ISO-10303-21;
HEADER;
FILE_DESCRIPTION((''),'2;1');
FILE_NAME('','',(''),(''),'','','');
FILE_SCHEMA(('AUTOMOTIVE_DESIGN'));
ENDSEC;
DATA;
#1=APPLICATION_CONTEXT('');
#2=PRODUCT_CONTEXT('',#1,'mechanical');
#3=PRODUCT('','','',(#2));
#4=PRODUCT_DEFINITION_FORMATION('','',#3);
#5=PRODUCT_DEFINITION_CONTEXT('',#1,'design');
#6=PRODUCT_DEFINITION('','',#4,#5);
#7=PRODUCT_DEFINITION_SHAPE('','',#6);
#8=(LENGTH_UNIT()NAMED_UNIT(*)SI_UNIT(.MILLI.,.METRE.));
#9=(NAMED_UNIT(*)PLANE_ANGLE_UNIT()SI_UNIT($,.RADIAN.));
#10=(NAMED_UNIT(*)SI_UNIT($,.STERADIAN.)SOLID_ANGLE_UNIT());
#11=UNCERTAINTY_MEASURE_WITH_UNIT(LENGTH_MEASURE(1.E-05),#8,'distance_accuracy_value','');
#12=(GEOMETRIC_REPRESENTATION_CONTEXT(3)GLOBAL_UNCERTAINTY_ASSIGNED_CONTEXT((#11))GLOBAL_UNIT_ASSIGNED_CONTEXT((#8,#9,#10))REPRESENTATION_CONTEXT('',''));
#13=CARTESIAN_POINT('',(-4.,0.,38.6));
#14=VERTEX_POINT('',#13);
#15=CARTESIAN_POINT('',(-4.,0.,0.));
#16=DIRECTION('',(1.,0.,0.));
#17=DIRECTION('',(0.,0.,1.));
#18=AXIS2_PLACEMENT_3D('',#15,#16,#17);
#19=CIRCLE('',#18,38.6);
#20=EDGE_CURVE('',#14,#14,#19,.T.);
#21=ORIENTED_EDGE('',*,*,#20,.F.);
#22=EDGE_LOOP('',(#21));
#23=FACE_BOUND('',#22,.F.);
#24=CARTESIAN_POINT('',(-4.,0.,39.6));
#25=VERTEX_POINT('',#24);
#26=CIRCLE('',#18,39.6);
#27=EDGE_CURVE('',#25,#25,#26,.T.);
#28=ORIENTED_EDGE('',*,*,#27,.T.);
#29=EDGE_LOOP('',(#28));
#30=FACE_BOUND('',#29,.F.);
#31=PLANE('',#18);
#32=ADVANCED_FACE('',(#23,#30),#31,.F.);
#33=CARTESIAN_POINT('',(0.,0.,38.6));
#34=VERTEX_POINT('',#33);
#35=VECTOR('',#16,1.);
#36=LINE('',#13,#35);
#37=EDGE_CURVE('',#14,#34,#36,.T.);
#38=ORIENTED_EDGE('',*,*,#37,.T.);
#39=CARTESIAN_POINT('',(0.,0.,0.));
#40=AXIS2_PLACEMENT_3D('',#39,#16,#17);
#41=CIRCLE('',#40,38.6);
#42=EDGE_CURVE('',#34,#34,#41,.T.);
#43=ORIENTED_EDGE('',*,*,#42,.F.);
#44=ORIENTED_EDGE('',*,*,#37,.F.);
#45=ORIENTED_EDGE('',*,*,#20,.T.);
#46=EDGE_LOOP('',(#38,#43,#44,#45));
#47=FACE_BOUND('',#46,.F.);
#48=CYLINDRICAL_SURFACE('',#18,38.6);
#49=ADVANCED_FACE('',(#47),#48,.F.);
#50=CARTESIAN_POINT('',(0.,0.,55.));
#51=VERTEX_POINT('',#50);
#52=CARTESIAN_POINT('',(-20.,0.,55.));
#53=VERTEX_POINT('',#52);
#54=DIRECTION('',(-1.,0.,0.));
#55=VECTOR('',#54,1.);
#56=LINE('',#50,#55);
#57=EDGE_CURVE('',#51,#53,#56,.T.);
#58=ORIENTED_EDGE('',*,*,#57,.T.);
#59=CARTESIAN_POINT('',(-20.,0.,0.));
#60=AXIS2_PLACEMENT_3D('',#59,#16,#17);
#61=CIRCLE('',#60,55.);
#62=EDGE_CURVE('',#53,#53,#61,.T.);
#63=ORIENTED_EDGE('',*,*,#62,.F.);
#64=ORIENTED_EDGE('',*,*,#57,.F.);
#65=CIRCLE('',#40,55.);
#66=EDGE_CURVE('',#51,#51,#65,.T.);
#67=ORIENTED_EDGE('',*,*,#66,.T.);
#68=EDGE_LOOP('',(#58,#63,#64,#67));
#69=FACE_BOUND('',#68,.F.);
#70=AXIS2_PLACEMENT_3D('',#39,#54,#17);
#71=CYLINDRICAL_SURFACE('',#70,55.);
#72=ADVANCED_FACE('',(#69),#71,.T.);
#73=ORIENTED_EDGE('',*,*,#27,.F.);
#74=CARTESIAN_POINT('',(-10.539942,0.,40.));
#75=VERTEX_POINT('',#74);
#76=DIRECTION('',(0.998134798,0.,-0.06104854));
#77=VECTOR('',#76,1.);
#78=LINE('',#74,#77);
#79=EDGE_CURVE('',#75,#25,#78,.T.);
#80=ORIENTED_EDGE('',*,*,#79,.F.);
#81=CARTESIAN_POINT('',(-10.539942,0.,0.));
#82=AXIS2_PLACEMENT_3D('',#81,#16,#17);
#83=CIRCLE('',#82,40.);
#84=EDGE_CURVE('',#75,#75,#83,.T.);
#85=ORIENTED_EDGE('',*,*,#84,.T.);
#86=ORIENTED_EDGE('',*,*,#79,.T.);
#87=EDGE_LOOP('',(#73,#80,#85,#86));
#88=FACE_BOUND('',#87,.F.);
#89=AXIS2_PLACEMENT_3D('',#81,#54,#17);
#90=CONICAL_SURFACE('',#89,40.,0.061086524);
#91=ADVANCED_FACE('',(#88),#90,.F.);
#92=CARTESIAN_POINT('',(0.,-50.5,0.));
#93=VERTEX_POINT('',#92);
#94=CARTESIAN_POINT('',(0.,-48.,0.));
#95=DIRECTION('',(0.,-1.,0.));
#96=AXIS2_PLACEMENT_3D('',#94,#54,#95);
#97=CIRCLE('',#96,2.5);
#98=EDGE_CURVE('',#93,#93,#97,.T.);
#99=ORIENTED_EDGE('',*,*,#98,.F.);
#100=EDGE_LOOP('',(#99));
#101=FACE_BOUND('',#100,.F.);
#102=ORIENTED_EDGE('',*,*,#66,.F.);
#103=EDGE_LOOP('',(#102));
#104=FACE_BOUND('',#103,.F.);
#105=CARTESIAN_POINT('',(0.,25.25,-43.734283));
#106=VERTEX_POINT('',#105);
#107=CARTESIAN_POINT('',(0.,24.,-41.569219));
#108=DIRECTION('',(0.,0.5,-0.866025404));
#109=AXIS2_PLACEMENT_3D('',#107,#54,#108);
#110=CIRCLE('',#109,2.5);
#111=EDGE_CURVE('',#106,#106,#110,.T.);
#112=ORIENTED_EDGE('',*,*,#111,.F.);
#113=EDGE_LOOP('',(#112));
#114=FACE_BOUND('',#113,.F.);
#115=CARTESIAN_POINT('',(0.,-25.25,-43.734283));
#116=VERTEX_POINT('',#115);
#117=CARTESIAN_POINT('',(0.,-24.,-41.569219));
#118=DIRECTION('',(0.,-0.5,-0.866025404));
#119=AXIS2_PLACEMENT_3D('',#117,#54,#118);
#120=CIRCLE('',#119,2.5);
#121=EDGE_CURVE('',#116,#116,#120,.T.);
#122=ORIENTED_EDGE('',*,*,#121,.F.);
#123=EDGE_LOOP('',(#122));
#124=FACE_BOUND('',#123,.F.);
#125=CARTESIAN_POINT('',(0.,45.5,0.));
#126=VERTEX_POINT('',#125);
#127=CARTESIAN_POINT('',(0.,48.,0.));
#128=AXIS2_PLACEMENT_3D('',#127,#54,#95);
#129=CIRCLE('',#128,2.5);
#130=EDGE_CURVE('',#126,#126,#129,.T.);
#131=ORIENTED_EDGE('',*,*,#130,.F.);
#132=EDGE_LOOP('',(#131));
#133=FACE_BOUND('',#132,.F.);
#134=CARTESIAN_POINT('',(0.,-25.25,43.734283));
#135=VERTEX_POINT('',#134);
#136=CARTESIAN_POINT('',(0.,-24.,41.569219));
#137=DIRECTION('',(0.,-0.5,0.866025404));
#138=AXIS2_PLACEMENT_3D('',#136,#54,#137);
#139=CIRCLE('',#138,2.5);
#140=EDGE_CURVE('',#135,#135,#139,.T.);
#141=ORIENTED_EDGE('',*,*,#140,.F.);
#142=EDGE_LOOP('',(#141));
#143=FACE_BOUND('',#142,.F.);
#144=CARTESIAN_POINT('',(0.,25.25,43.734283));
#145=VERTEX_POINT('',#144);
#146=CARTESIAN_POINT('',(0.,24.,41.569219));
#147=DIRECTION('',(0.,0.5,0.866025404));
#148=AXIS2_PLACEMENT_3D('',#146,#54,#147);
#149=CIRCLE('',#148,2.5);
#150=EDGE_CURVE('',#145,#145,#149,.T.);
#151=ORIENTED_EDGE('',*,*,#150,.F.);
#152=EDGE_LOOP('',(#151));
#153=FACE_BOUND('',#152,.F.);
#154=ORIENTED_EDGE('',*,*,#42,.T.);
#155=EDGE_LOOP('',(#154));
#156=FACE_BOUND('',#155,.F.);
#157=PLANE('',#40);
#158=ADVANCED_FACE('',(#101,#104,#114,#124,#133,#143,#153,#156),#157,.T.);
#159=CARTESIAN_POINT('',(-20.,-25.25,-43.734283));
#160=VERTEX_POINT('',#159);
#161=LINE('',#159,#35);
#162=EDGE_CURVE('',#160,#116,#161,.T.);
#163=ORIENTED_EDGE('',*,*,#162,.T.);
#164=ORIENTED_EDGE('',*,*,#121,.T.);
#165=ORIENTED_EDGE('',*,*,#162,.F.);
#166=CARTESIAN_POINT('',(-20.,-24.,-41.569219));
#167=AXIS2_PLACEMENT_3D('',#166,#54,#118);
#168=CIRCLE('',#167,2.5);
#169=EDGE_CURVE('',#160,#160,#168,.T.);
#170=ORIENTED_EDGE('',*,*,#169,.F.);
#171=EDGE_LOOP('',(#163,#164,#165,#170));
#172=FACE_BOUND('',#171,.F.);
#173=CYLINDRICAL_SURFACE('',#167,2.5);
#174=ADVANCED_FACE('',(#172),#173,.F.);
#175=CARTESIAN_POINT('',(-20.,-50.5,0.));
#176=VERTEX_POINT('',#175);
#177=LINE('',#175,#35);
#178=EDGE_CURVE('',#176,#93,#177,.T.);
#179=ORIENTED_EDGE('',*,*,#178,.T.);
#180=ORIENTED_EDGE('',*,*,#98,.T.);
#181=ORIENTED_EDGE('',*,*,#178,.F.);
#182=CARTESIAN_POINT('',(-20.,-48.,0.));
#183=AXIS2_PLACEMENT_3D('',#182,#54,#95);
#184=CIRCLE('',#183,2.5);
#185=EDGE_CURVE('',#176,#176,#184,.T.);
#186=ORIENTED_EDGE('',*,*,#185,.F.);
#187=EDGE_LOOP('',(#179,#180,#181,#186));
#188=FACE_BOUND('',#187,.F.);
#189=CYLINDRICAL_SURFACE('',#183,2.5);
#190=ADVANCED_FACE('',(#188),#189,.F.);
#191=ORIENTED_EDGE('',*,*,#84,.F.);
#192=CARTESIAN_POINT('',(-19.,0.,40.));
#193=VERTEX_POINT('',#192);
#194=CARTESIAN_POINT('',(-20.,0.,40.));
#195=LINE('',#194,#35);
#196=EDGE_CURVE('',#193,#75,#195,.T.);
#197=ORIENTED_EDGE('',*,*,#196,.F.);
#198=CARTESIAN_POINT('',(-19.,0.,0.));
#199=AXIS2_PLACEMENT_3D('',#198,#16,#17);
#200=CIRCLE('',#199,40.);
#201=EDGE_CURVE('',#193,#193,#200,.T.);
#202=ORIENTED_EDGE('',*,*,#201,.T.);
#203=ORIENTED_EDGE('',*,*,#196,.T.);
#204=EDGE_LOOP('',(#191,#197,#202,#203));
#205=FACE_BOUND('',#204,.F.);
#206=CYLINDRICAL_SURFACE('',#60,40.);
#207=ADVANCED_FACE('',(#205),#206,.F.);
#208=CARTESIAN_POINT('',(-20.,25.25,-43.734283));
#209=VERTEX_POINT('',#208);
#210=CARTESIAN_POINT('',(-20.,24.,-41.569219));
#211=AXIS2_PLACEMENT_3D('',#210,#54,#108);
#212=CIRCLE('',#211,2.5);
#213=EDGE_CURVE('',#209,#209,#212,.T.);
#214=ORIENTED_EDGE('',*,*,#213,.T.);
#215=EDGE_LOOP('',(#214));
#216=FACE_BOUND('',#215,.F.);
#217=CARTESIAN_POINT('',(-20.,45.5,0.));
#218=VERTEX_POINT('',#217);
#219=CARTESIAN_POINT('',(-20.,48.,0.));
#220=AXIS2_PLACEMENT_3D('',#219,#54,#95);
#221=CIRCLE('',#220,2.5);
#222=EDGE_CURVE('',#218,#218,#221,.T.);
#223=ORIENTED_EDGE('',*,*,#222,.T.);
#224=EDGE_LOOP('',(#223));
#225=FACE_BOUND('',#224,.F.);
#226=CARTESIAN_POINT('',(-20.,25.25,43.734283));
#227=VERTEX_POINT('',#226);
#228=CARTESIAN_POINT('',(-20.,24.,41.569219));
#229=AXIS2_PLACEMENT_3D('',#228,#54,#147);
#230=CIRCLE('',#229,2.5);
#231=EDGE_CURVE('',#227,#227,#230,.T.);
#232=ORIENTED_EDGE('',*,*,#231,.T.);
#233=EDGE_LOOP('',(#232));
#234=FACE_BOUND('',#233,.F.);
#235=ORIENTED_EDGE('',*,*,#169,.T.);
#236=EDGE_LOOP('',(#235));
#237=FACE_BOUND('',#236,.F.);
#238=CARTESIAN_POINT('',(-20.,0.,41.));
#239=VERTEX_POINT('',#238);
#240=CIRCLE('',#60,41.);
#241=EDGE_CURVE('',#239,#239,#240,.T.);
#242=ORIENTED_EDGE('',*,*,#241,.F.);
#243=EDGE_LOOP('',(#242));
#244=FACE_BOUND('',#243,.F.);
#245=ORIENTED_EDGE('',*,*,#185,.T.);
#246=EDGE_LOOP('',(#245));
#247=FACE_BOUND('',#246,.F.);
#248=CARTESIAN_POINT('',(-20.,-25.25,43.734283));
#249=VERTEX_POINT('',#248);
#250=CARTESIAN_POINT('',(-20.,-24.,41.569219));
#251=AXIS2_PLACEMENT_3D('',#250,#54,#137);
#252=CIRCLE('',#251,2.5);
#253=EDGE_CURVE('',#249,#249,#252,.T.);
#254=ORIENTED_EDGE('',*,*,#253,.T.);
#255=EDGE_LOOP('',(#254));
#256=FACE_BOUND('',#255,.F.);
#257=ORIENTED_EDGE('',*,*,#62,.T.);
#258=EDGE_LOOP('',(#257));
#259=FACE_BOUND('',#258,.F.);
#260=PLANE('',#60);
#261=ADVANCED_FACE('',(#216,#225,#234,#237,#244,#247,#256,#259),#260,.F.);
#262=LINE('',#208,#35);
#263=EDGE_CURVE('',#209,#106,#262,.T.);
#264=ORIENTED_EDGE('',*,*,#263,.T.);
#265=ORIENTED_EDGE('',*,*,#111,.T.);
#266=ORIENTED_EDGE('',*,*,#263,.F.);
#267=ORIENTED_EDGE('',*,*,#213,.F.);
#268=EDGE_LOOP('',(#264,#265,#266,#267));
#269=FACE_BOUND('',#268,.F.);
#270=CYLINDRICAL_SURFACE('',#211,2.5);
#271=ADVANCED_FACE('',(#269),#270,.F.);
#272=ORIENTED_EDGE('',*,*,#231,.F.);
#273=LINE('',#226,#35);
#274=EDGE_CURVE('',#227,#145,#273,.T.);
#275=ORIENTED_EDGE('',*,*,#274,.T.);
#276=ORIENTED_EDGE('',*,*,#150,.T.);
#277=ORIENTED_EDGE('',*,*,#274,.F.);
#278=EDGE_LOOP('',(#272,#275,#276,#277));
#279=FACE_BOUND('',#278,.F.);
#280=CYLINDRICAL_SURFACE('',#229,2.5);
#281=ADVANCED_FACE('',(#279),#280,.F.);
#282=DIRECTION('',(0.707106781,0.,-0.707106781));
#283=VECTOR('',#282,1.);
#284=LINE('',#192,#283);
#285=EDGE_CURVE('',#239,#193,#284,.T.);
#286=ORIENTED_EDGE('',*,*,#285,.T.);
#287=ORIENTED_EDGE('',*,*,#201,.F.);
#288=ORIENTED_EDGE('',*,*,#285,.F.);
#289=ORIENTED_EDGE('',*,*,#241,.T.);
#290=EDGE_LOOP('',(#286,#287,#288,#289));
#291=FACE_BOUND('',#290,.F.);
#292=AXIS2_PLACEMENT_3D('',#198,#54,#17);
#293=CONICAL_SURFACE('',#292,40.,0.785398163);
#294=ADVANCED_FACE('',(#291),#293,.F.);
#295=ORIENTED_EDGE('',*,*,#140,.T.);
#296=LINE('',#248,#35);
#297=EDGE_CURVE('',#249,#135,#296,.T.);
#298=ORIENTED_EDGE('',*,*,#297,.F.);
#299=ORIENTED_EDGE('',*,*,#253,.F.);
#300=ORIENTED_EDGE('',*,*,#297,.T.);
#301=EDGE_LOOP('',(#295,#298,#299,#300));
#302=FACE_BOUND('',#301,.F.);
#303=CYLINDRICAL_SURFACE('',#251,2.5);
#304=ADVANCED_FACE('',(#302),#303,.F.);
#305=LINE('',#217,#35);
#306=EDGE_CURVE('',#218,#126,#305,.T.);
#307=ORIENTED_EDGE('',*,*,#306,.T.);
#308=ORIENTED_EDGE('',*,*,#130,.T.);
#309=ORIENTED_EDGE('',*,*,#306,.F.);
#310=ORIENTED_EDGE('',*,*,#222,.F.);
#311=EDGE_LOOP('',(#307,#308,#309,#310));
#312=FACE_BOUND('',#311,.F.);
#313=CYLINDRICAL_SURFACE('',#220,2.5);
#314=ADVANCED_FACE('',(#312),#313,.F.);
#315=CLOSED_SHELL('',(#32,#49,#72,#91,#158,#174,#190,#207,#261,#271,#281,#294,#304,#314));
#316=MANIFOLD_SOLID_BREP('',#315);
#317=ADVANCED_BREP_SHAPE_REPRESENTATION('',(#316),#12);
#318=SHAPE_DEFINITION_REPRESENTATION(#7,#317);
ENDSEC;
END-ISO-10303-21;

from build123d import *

# Parameters (mm, degrees)
F2_SIZE          = 1
F3_R             = 2.5
F4_DEPTH         = 20.001
F4_COPIES_COUNT  = 3
F4_COPIES_ANGLE  = 120
F4_COPIES1_COUNT = 3
F4_COPIES1_ANGLE = 120
F5_R             = 2.5
F6_DEPTH         = 20.001


# Not quite as in the source:
# - a pattern or mirror of a feature is missing from the dataset's text; its kind, count and spacing are read off the source's solid


with BuildPart() as f1:
    # F0 (on Front) → F1 (revolve)
    with BuildSketch(Plane.XZ):
        Polygon((-4, 38.6), (0, 38.6), (0, 55), (-20, 55), (-20, 40), (-10.5399421904, 40), (-4, 39.6), align=None)
    revolve(axis=Axis((12.3917190358, 0, 0), (1, 0, 0)))

    # F2
    f2_edges = [f1.edges().sort_by_distance(p)[0] for p in [
        (-20, 0, -40),
    ]]
    chamfer(f2_edges, length=F2_SIZE)

    # F3 (on face) → F4 (cut, through all)
    with BuildSketch(Plane(origin=(-20, 0, 0), x_dir=(0, -1, 0), z_dir=(-1, 0, 0))):
        with Locations((48, 0)):
            Circle(F3_R)
    f4 = extrude(amount=-F4_DEPTH, mode=Mode.SUBTRACT)

    # F4_copies: F4 ×3 about axis
    f4_copies_axis = Axis((0, 0, 0), (1, 0, 0))
    for i in range(1, F4_COPIES_COUNT):
        add(f4.rotate(f4_copies_axis, i * F4_COPIES_ANGLE / (F4_COPIES_COUNT - 1)), mode=Mode.SUBTRACT)

    # F4_copies1: F4 ×3 about axis
    f4_copies1_axis = Axis((0, 0, 0), (-1, 0, 0))
    for i in range(1, F4_COPIES1_COUNT):
        add(f4.rotate(f4_copies1_axis, i * F4_COPIES1_ANGLE / (F4_COPIES1_COUNT - 1)), mode=Mode.SUBTRACT)

    # F5 (on face) → F6 (cut, through all)
    with BuildSketch(Plane(origin=(-20, 0, 0), x_dir=(0, -1, 0), z_dir=(-1, 0, 0))):
        with Locations((-48, 0)):
            Circle(F5_R)
    extrude(amount=-F6_DEPTH, mode=Mode.SUBTRACT)


solid = f1.part
